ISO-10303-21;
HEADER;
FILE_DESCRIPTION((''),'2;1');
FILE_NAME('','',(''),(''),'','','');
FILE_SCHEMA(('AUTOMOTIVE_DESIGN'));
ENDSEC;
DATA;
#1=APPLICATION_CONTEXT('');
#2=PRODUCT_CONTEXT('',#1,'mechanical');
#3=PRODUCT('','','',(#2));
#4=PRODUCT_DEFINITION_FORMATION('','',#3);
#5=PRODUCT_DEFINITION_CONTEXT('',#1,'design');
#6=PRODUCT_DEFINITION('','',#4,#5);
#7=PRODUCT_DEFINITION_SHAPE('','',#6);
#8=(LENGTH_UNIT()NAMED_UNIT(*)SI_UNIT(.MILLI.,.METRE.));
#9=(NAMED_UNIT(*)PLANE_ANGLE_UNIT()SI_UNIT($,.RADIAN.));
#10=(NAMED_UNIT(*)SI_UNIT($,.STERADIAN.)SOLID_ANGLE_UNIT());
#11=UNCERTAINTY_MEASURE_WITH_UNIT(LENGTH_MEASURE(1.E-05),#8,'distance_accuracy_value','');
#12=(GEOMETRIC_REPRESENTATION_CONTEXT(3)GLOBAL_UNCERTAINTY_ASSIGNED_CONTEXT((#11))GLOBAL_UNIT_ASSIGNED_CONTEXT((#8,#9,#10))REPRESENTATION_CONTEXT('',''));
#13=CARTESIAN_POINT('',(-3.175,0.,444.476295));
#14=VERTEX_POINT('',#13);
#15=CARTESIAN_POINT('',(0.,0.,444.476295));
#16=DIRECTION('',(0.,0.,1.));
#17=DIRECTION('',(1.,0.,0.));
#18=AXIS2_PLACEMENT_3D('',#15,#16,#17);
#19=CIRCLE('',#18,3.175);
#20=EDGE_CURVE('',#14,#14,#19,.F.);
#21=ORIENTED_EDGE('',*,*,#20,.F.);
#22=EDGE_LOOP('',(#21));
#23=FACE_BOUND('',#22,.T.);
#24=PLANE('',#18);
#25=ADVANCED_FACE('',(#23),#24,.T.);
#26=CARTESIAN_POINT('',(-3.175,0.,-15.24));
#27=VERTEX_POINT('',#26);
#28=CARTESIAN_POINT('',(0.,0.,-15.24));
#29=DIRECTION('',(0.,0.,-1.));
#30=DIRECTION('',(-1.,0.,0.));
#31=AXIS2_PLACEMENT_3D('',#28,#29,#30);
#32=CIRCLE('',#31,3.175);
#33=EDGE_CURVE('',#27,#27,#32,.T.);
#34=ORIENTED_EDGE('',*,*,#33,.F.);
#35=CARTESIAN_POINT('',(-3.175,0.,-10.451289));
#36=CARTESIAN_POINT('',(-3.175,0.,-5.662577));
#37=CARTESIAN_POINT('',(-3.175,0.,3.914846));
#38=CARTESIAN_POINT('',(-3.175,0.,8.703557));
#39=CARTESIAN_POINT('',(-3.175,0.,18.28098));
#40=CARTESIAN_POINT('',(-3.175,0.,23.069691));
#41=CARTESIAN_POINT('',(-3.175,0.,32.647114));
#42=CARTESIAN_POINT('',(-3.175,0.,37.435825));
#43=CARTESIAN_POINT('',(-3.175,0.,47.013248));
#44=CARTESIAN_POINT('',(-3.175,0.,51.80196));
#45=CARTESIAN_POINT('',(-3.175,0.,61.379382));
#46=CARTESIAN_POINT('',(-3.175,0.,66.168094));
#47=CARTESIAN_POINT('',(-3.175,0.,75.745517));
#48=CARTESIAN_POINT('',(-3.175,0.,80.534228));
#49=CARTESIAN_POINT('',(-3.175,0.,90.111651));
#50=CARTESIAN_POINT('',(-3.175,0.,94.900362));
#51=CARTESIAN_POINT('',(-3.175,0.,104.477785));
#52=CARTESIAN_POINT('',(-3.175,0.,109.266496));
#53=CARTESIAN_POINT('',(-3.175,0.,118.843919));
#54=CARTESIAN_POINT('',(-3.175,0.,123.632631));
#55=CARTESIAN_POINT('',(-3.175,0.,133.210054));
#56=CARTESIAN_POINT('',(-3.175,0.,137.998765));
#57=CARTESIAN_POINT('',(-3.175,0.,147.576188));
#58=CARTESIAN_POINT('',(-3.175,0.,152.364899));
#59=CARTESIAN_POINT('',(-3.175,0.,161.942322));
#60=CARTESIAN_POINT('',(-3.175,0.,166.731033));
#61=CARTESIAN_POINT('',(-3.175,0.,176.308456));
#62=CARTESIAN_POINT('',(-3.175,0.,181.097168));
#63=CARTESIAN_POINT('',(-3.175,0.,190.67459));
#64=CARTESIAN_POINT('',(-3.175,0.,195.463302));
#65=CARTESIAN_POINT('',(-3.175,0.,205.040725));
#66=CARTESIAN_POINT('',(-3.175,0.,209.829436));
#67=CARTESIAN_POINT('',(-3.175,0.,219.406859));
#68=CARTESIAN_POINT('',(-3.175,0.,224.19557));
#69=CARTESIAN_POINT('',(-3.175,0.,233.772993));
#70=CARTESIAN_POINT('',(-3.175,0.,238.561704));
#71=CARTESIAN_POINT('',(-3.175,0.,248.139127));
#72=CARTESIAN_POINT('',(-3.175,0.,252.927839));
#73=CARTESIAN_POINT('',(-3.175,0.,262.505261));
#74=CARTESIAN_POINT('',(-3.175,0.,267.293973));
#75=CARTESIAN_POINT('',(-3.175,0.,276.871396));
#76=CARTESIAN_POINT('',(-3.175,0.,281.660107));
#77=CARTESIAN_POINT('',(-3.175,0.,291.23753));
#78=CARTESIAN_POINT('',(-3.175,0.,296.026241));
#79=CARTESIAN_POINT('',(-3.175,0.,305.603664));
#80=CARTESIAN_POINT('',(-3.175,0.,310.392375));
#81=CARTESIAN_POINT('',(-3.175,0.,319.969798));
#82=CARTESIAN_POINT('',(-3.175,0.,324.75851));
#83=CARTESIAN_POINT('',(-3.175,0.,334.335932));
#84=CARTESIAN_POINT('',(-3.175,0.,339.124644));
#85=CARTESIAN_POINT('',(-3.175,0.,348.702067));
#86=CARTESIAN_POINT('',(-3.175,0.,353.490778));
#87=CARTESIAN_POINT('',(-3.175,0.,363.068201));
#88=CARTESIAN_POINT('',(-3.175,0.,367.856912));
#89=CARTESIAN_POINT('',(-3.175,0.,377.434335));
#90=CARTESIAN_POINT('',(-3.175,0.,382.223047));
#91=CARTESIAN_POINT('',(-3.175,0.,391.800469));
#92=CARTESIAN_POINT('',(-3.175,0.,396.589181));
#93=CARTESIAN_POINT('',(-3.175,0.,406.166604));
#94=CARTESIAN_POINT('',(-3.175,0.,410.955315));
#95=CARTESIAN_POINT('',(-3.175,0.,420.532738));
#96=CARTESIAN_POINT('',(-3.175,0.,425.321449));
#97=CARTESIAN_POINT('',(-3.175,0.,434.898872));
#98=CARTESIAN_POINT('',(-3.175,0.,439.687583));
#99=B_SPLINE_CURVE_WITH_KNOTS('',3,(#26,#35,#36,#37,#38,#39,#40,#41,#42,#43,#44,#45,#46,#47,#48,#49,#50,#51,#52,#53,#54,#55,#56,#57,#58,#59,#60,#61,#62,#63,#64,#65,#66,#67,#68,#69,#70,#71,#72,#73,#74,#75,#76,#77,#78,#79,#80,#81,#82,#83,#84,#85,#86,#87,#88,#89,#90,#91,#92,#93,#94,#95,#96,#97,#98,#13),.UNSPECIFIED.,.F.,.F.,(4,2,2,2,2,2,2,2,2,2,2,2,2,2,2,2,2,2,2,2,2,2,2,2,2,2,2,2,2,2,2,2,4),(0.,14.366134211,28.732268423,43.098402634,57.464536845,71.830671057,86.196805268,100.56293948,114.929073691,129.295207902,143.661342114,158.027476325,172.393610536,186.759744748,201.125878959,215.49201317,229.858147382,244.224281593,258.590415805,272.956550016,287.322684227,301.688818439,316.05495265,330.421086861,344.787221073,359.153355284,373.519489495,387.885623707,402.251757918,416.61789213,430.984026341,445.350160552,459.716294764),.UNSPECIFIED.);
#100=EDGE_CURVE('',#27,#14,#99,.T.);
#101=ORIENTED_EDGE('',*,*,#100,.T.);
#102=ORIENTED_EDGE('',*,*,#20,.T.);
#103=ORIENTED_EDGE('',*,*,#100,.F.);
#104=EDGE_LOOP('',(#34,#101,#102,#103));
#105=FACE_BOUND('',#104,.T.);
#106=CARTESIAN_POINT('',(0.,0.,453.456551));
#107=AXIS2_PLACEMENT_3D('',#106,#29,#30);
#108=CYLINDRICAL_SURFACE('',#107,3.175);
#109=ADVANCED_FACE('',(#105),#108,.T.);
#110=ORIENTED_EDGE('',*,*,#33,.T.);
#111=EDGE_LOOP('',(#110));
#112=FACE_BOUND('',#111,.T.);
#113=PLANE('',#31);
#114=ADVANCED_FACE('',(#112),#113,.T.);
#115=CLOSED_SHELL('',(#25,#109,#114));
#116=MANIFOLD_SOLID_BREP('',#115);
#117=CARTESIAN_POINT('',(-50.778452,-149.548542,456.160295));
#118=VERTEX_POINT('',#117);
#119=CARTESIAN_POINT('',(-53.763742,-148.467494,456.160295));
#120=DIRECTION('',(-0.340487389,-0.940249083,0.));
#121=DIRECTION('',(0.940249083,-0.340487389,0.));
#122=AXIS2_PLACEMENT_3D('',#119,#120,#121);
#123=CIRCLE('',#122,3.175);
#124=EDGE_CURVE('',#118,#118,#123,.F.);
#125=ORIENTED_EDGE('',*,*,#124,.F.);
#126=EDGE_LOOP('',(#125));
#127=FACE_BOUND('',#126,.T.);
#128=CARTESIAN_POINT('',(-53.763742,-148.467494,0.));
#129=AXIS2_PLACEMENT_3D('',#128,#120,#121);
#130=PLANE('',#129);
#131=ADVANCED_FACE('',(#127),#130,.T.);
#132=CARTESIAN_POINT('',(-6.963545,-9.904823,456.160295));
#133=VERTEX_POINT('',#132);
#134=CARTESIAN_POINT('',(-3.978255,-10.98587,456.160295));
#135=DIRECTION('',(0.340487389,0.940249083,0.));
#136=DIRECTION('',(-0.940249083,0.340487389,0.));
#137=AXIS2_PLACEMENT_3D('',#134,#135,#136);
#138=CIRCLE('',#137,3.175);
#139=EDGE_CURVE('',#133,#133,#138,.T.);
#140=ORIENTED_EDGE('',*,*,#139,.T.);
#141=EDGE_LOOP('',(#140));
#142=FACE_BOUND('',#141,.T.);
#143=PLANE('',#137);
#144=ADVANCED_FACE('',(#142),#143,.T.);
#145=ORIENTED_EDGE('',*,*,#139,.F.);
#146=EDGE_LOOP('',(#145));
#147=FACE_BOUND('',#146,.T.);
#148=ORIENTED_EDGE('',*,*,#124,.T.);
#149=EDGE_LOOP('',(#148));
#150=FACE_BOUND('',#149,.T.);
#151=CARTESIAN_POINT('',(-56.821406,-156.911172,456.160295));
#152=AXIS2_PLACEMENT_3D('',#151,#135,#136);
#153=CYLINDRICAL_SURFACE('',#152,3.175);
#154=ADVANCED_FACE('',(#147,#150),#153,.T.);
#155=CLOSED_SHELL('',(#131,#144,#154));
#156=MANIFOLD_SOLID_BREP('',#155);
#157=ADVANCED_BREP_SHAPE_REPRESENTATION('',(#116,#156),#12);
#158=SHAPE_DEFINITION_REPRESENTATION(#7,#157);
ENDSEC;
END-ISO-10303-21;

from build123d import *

# Parameters (mm, degrees)
BOSS_EXTRUDE1_START     = -459.716294764
BOSS_EXTRUDE1_OUTLINE_R = 3.175
BOSS_EXTRUDE1_DEPTH     = 459.716294764
SKETCH3_R               = 3.175
BOSS_EXTRUDE2_DEPTH     = 146.218301515


# Read off the part's stored shape, not the designer's step: Boss-Extrude1
with BuildPart() as part:
    # Boss-Extrude1 outline → Boss-Extrude1 (new body)
    with BuildSketch(Plane(origin=(0, 0, -15.24), x_dir=(-1, 0, 0), z_dir=(0, 0, -1)).offset(BOSS_EXTRUDE1_START)):
        Circle(BOSS_EXTRUDE1_OUTLINE_R)
    extrude(amount=BOSS_EXTRUDE1_DEPTH)


with BuildPart() as body_2:
    # Sketch3 → Boss-Extrude2 (new body)
    with BuildSketch(Plane(origin=(-3.978254652, -10.985870285, 0), x_dir=(0.9402490829575615, -0.3404873888963652, 0), z_dir=(0.3404873888963652, 0.9402490829575615, 4.8254138608759004e-15))):
        with Locations(Location((0, -456.160294764, 0), (0, 0, 180))):
            Circle(SKETCH3_R)
    extrude(amount=-BOSS_EXTRUDE2_DEPTH)


solid = Compound([part.part, body_2.part])
